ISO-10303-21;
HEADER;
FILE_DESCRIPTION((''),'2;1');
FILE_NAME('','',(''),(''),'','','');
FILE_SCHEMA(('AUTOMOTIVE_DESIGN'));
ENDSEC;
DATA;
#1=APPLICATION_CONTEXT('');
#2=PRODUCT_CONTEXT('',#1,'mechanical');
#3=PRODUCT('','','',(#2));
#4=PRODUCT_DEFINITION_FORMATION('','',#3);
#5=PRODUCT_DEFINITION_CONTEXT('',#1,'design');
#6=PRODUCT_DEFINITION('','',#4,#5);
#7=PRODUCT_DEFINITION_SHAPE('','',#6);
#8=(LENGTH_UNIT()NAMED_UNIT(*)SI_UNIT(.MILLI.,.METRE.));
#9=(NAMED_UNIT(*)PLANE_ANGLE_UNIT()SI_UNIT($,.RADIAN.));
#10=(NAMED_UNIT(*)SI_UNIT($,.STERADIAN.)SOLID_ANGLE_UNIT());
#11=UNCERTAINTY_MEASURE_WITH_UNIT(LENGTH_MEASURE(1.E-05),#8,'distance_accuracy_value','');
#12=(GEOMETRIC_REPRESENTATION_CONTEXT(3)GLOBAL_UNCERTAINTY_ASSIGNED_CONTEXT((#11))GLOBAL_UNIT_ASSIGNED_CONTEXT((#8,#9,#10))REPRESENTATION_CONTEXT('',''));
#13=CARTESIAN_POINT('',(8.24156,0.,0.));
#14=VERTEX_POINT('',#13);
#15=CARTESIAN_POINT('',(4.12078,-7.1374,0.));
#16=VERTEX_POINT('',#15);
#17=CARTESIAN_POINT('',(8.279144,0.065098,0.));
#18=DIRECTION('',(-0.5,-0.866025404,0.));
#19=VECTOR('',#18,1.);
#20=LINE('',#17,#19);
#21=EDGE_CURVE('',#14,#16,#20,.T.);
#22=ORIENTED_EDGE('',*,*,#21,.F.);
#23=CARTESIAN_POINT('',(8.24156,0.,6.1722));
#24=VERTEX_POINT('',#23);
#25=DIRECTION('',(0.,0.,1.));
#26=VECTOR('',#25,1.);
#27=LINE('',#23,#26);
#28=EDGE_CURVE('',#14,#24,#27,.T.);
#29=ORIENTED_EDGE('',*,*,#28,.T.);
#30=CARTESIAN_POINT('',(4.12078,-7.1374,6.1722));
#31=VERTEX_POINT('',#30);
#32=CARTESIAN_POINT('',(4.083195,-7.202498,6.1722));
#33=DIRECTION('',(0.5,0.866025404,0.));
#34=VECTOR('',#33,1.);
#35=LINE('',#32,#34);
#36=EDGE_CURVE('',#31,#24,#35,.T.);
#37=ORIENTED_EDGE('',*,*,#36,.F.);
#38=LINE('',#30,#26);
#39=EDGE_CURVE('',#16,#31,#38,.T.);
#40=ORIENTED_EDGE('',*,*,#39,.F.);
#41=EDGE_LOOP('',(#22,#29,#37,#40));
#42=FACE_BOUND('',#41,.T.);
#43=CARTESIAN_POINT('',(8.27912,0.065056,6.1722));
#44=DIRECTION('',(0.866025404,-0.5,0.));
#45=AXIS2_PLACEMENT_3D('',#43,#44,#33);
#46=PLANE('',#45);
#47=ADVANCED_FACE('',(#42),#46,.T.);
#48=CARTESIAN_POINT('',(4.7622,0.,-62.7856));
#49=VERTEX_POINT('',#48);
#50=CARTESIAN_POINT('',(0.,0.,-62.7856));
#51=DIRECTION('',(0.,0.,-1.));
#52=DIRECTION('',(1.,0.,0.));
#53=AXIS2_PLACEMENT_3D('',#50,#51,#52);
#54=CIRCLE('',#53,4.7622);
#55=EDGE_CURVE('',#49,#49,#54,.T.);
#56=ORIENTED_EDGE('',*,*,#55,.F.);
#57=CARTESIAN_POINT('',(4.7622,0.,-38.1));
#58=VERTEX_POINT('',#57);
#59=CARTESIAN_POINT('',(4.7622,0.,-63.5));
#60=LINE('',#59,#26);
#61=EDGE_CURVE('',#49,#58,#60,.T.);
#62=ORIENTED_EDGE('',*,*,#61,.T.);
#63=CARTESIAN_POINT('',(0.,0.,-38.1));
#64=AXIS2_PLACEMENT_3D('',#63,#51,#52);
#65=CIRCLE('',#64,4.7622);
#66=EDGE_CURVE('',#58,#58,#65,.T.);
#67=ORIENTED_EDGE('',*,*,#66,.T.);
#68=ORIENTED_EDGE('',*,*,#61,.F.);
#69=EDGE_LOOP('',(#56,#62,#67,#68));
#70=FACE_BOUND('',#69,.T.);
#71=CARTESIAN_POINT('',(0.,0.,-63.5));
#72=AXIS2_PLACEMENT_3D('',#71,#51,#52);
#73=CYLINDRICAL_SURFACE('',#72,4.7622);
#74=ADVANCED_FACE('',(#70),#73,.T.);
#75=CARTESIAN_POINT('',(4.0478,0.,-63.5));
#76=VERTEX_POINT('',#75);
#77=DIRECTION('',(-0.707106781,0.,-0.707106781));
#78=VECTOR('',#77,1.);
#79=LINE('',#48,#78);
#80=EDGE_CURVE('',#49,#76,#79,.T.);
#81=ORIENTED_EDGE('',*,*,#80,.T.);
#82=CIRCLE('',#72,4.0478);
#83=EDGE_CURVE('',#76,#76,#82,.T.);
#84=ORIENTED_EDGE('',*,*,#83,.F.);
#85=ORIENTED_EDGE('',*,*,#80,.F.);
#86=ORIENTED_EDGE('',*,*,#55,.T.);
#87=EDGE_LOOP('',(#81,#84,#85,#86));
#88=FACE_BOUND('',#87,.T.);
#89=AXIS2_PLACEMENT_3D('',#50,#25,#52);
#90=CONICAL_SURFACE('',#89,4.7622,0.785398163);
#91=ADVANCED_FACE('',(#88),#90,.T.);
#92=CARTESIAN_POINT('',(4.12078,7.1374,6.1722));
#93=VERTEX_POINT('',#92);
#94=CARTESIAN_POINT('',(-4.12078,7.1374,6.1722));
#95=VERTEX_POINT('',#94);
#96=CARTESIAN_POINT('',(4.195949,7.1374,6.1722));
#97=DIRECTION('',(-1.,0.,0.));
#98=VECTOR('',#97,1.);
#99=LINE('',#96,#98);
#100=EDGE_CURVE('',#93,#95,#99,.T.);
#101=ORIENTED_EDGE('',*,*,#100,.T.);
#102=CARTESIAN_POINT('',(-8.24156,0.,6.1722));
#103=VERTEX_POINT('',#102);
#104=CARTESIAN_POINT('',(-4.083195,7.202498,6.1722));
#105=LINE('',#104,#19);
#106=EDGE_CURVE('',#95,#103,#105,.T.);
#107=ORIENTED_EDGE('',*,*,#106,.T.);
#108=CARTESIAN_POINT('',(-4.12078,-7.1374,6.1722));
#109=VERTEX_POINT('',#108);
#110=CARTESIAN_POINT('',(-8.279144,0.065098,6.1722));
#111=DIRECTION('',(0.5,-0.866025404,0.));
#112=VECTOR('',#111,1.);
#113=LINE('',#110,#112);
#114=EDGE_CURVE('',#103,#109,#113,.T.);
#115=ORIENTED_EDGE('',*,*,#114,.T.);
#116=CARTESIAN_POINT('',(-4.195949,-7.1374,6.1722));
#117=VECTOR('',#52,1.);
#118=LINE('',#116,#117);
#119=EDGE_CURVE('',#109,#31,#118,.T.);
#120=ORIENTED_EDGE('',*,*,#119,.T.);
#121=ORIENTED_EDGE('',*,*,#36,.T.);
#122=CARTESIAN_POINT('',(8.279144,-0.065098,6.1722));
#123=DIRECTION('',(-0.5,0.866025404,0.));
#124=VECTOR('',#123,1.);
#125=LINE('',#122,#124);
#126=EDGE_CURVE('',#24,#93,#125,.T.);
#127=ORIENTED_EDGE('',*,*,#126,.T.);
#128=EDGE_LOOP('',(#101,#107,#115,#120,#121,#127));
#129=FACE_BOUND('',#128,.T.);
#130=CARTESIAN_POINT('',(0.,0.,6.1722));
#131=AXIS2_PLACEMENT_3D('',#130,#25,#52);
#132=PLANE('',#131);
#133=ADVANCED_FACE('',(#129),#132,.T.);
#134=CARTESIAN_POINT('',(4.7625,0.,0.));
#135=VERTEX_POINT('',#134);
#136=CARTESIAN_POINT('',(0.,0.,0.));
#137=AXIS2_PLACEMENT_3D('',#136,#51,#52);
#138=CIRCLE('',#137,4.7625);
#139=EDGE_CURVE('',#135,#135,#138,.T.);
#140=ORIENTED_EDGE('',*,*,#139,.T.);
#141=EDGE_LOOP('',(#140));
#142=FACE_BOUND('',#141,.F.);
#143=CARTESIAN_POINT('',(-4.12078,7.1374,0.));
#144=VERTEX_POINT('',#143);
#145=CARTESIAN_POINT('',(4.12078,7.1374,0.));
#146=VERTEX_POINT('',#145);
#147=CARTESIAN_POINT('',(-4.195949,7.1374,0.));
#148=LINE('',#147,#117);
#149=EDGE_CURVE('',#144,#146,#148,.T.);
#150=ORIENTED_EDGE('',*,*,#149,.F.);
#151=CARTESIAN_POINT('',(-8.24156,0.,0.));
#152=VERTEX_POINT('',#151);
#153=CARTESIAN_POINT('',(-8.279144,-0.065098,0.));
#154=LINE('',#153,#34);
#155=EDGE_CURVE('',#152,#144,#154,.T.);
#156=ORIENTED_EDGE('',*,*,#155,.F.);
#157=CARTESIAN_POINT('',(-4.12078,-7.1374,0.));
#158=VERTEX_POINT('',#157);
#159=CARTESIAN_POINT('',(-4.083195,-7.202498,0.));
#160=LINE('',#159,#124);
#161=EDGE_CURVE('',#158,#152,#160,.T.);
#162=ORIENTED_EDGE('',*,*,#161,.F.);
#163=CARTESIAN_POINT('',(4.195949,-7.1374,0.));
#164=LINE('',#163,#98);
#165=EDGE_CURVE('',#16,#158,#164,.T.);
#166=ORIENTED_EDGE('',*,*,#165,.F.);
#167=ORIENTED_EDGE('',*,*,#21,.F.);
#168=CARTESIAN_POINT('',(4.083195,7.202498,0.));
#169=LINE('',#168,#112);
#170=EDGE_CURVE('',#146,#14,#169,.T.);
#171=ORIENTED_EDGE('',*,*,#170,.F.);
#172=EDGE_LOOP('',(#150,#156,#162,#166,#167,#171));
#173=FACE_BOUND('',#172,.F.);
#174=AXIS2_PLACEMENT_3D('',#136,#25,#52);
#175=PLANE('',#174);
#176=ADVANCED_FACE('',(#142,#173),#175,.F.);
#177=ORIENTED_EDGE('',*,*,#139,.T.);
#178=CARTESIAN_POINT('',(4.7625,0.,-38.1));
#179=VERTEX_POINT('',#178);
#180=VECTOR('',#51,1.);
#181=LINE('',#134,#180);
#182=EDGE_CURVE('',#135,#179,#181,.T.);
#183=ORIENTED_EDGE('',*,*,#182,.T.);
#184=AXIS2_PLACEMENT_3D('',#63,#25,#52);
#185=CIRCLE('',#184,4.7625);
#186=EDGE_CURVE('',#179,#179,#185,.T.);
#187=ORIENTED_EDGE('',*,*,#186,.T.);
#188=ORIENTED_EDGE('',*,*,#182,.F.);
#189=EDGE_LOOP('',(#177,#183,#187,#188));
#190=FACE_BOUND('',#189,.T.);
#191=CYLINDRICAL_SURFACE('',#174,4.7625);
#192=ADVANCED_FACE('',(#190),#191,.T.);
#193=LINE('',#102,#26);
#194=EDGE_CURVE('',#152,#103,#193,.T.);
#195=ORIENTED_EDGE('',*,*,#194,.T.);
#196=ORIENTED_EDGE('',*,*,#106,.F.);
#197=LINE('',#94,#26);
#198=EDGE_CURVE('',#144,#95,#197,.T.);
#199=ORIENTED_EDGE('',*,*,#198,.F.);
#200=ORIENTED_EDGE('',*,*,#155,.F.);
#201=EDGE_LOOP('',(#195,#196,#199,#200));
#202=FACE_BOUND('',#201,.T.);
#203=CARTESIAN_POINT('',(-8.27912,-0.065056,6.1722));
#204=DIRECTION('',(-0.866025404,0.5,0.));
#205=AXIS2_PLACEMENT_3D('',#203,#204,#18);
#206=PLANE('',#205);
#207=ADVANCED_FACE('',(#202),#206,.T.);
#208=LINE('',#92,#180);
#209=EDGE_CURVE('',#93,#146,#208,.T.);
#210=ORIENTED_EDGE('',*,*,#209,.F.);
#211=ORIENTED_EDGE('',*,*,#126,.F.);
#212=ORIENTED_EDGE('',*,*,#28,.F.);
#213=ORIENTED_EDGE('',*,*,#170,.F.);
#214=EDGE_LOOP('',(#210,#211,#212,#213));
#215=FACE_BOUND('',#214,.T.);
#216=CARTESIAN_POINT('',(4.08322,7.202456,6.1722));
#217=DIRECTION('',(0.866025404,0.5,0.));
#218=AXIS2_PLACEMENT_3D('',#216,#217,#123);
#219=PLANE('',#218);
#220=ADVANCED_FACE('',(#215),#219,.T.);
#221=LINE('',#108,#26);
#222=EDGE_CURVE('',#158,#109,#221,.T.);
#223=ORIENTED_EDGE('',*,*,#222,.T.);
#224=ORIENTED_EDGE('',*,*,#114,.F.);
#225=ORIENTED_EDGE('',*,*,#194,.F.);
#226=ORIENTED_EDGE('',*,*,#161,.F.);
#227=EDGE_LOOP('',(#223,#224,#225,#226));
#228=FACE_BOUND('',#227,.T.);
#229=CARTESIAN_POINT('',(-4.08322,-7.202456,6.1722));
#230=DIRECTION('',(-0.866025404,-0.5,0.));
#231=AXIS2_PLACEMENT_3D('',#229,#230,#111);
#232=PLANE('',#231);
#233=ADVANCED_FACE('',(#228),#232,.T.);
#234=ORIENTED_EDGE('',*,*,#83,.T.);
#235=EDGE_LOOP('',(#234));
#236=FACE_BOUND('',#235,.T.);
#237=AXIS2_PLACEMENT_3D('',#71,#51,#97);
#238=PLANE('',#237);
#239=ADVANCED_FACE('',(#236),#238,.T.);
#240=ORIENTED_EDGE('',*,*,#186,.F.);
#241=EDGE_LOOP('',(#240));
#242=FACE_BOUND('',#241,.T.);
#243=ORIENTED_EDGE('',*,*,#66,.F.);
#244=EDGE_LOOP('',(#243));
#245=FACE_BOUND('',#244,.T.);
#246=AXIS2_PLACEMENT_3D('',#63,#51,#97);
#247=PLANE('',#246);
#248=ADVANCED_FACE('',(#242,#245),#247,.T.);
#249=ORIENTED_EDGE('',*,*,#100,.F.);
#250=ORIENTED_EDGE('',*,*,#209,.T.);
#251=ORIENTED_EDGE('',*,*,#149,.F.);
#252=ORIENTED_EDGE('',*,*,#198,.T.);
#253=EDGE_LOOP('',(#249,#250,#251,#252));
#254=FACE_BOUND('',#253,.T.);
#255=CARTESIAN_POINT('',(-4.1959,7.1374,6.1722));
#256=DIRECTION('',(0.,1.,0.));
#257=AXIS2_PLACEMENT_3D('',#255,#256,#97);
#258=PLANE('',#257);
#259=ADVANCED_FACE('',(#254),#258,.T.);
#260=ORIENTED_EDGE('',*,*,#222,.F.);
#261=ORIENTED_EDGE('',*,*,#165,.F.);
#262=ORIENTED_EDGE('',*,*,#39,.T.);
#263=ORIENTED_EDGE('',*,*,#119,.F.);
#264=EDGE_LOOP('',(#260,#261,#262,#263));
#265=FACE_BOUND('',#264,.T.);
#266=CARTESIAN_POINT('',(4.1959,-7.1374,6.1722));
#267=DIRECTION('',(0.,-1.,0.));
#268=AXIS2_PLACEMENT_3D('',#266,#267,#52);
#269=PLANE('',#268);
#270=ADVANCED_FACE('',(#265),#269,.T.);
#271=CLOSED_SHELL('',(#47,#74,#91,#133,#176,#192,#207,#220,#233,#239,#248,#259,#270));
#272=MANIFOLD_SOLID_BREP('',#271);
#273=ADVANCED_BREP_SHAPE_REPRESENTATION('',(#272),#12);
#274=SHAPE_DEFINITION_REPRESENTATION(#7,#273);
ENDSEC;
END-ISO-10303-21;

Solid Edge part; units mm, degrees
sketch "Sketch1" plane through (0, 0, 0) normal (0, 0, 1) x (1, 0, 0)
  circle A0 centre (0, 0) radius 8.2794
  dimension "D1" = 16.5588
extrude "Protrusion1" add sketch "Sketch1" along normal blind 6.1722
sketch "Sketch2" plane through (0, 0, 0) normal (0, 0, -1) x (1, 0, 0)
  circle A0 centre (0, 0) radius 4.7625
extrude "Protrusion2" add sketch "Sketch2" along normal blind 63.5
sketch "Sketch3" plane through (0, 0, -63.5) normal (0, 0, -1) x (1, 0, 0)
  circle A0 centre (0, 0) radius 4.7622
extrude "Cutout1" cut sketch "Sketch3" against normal blind 25.4 flip side to cut
chamfer "Chamfer_1" distance 0.7144 angle 45 1 edges at (-4.7622, 0, -63.5)
sketch "Sketch4" plane through (0, 0, 6.1722) normal (0, 0, 1) x (1, 0, 0)
  line L0 (-4.1959, 7.1374) -> (4.1959, 7.1374)
  dimension "D1" = 14.2748
extrude "Cutout2" cut sketch "Sketch4" against normal up to next material side at (0, 7.1874, 6.1722)
pattern_circular "Pattern1" count 6 over 360 about axis through (0, 0, 6.1722) along (0, 0, 1) of "Cutout2"
properties part number "24100017"
